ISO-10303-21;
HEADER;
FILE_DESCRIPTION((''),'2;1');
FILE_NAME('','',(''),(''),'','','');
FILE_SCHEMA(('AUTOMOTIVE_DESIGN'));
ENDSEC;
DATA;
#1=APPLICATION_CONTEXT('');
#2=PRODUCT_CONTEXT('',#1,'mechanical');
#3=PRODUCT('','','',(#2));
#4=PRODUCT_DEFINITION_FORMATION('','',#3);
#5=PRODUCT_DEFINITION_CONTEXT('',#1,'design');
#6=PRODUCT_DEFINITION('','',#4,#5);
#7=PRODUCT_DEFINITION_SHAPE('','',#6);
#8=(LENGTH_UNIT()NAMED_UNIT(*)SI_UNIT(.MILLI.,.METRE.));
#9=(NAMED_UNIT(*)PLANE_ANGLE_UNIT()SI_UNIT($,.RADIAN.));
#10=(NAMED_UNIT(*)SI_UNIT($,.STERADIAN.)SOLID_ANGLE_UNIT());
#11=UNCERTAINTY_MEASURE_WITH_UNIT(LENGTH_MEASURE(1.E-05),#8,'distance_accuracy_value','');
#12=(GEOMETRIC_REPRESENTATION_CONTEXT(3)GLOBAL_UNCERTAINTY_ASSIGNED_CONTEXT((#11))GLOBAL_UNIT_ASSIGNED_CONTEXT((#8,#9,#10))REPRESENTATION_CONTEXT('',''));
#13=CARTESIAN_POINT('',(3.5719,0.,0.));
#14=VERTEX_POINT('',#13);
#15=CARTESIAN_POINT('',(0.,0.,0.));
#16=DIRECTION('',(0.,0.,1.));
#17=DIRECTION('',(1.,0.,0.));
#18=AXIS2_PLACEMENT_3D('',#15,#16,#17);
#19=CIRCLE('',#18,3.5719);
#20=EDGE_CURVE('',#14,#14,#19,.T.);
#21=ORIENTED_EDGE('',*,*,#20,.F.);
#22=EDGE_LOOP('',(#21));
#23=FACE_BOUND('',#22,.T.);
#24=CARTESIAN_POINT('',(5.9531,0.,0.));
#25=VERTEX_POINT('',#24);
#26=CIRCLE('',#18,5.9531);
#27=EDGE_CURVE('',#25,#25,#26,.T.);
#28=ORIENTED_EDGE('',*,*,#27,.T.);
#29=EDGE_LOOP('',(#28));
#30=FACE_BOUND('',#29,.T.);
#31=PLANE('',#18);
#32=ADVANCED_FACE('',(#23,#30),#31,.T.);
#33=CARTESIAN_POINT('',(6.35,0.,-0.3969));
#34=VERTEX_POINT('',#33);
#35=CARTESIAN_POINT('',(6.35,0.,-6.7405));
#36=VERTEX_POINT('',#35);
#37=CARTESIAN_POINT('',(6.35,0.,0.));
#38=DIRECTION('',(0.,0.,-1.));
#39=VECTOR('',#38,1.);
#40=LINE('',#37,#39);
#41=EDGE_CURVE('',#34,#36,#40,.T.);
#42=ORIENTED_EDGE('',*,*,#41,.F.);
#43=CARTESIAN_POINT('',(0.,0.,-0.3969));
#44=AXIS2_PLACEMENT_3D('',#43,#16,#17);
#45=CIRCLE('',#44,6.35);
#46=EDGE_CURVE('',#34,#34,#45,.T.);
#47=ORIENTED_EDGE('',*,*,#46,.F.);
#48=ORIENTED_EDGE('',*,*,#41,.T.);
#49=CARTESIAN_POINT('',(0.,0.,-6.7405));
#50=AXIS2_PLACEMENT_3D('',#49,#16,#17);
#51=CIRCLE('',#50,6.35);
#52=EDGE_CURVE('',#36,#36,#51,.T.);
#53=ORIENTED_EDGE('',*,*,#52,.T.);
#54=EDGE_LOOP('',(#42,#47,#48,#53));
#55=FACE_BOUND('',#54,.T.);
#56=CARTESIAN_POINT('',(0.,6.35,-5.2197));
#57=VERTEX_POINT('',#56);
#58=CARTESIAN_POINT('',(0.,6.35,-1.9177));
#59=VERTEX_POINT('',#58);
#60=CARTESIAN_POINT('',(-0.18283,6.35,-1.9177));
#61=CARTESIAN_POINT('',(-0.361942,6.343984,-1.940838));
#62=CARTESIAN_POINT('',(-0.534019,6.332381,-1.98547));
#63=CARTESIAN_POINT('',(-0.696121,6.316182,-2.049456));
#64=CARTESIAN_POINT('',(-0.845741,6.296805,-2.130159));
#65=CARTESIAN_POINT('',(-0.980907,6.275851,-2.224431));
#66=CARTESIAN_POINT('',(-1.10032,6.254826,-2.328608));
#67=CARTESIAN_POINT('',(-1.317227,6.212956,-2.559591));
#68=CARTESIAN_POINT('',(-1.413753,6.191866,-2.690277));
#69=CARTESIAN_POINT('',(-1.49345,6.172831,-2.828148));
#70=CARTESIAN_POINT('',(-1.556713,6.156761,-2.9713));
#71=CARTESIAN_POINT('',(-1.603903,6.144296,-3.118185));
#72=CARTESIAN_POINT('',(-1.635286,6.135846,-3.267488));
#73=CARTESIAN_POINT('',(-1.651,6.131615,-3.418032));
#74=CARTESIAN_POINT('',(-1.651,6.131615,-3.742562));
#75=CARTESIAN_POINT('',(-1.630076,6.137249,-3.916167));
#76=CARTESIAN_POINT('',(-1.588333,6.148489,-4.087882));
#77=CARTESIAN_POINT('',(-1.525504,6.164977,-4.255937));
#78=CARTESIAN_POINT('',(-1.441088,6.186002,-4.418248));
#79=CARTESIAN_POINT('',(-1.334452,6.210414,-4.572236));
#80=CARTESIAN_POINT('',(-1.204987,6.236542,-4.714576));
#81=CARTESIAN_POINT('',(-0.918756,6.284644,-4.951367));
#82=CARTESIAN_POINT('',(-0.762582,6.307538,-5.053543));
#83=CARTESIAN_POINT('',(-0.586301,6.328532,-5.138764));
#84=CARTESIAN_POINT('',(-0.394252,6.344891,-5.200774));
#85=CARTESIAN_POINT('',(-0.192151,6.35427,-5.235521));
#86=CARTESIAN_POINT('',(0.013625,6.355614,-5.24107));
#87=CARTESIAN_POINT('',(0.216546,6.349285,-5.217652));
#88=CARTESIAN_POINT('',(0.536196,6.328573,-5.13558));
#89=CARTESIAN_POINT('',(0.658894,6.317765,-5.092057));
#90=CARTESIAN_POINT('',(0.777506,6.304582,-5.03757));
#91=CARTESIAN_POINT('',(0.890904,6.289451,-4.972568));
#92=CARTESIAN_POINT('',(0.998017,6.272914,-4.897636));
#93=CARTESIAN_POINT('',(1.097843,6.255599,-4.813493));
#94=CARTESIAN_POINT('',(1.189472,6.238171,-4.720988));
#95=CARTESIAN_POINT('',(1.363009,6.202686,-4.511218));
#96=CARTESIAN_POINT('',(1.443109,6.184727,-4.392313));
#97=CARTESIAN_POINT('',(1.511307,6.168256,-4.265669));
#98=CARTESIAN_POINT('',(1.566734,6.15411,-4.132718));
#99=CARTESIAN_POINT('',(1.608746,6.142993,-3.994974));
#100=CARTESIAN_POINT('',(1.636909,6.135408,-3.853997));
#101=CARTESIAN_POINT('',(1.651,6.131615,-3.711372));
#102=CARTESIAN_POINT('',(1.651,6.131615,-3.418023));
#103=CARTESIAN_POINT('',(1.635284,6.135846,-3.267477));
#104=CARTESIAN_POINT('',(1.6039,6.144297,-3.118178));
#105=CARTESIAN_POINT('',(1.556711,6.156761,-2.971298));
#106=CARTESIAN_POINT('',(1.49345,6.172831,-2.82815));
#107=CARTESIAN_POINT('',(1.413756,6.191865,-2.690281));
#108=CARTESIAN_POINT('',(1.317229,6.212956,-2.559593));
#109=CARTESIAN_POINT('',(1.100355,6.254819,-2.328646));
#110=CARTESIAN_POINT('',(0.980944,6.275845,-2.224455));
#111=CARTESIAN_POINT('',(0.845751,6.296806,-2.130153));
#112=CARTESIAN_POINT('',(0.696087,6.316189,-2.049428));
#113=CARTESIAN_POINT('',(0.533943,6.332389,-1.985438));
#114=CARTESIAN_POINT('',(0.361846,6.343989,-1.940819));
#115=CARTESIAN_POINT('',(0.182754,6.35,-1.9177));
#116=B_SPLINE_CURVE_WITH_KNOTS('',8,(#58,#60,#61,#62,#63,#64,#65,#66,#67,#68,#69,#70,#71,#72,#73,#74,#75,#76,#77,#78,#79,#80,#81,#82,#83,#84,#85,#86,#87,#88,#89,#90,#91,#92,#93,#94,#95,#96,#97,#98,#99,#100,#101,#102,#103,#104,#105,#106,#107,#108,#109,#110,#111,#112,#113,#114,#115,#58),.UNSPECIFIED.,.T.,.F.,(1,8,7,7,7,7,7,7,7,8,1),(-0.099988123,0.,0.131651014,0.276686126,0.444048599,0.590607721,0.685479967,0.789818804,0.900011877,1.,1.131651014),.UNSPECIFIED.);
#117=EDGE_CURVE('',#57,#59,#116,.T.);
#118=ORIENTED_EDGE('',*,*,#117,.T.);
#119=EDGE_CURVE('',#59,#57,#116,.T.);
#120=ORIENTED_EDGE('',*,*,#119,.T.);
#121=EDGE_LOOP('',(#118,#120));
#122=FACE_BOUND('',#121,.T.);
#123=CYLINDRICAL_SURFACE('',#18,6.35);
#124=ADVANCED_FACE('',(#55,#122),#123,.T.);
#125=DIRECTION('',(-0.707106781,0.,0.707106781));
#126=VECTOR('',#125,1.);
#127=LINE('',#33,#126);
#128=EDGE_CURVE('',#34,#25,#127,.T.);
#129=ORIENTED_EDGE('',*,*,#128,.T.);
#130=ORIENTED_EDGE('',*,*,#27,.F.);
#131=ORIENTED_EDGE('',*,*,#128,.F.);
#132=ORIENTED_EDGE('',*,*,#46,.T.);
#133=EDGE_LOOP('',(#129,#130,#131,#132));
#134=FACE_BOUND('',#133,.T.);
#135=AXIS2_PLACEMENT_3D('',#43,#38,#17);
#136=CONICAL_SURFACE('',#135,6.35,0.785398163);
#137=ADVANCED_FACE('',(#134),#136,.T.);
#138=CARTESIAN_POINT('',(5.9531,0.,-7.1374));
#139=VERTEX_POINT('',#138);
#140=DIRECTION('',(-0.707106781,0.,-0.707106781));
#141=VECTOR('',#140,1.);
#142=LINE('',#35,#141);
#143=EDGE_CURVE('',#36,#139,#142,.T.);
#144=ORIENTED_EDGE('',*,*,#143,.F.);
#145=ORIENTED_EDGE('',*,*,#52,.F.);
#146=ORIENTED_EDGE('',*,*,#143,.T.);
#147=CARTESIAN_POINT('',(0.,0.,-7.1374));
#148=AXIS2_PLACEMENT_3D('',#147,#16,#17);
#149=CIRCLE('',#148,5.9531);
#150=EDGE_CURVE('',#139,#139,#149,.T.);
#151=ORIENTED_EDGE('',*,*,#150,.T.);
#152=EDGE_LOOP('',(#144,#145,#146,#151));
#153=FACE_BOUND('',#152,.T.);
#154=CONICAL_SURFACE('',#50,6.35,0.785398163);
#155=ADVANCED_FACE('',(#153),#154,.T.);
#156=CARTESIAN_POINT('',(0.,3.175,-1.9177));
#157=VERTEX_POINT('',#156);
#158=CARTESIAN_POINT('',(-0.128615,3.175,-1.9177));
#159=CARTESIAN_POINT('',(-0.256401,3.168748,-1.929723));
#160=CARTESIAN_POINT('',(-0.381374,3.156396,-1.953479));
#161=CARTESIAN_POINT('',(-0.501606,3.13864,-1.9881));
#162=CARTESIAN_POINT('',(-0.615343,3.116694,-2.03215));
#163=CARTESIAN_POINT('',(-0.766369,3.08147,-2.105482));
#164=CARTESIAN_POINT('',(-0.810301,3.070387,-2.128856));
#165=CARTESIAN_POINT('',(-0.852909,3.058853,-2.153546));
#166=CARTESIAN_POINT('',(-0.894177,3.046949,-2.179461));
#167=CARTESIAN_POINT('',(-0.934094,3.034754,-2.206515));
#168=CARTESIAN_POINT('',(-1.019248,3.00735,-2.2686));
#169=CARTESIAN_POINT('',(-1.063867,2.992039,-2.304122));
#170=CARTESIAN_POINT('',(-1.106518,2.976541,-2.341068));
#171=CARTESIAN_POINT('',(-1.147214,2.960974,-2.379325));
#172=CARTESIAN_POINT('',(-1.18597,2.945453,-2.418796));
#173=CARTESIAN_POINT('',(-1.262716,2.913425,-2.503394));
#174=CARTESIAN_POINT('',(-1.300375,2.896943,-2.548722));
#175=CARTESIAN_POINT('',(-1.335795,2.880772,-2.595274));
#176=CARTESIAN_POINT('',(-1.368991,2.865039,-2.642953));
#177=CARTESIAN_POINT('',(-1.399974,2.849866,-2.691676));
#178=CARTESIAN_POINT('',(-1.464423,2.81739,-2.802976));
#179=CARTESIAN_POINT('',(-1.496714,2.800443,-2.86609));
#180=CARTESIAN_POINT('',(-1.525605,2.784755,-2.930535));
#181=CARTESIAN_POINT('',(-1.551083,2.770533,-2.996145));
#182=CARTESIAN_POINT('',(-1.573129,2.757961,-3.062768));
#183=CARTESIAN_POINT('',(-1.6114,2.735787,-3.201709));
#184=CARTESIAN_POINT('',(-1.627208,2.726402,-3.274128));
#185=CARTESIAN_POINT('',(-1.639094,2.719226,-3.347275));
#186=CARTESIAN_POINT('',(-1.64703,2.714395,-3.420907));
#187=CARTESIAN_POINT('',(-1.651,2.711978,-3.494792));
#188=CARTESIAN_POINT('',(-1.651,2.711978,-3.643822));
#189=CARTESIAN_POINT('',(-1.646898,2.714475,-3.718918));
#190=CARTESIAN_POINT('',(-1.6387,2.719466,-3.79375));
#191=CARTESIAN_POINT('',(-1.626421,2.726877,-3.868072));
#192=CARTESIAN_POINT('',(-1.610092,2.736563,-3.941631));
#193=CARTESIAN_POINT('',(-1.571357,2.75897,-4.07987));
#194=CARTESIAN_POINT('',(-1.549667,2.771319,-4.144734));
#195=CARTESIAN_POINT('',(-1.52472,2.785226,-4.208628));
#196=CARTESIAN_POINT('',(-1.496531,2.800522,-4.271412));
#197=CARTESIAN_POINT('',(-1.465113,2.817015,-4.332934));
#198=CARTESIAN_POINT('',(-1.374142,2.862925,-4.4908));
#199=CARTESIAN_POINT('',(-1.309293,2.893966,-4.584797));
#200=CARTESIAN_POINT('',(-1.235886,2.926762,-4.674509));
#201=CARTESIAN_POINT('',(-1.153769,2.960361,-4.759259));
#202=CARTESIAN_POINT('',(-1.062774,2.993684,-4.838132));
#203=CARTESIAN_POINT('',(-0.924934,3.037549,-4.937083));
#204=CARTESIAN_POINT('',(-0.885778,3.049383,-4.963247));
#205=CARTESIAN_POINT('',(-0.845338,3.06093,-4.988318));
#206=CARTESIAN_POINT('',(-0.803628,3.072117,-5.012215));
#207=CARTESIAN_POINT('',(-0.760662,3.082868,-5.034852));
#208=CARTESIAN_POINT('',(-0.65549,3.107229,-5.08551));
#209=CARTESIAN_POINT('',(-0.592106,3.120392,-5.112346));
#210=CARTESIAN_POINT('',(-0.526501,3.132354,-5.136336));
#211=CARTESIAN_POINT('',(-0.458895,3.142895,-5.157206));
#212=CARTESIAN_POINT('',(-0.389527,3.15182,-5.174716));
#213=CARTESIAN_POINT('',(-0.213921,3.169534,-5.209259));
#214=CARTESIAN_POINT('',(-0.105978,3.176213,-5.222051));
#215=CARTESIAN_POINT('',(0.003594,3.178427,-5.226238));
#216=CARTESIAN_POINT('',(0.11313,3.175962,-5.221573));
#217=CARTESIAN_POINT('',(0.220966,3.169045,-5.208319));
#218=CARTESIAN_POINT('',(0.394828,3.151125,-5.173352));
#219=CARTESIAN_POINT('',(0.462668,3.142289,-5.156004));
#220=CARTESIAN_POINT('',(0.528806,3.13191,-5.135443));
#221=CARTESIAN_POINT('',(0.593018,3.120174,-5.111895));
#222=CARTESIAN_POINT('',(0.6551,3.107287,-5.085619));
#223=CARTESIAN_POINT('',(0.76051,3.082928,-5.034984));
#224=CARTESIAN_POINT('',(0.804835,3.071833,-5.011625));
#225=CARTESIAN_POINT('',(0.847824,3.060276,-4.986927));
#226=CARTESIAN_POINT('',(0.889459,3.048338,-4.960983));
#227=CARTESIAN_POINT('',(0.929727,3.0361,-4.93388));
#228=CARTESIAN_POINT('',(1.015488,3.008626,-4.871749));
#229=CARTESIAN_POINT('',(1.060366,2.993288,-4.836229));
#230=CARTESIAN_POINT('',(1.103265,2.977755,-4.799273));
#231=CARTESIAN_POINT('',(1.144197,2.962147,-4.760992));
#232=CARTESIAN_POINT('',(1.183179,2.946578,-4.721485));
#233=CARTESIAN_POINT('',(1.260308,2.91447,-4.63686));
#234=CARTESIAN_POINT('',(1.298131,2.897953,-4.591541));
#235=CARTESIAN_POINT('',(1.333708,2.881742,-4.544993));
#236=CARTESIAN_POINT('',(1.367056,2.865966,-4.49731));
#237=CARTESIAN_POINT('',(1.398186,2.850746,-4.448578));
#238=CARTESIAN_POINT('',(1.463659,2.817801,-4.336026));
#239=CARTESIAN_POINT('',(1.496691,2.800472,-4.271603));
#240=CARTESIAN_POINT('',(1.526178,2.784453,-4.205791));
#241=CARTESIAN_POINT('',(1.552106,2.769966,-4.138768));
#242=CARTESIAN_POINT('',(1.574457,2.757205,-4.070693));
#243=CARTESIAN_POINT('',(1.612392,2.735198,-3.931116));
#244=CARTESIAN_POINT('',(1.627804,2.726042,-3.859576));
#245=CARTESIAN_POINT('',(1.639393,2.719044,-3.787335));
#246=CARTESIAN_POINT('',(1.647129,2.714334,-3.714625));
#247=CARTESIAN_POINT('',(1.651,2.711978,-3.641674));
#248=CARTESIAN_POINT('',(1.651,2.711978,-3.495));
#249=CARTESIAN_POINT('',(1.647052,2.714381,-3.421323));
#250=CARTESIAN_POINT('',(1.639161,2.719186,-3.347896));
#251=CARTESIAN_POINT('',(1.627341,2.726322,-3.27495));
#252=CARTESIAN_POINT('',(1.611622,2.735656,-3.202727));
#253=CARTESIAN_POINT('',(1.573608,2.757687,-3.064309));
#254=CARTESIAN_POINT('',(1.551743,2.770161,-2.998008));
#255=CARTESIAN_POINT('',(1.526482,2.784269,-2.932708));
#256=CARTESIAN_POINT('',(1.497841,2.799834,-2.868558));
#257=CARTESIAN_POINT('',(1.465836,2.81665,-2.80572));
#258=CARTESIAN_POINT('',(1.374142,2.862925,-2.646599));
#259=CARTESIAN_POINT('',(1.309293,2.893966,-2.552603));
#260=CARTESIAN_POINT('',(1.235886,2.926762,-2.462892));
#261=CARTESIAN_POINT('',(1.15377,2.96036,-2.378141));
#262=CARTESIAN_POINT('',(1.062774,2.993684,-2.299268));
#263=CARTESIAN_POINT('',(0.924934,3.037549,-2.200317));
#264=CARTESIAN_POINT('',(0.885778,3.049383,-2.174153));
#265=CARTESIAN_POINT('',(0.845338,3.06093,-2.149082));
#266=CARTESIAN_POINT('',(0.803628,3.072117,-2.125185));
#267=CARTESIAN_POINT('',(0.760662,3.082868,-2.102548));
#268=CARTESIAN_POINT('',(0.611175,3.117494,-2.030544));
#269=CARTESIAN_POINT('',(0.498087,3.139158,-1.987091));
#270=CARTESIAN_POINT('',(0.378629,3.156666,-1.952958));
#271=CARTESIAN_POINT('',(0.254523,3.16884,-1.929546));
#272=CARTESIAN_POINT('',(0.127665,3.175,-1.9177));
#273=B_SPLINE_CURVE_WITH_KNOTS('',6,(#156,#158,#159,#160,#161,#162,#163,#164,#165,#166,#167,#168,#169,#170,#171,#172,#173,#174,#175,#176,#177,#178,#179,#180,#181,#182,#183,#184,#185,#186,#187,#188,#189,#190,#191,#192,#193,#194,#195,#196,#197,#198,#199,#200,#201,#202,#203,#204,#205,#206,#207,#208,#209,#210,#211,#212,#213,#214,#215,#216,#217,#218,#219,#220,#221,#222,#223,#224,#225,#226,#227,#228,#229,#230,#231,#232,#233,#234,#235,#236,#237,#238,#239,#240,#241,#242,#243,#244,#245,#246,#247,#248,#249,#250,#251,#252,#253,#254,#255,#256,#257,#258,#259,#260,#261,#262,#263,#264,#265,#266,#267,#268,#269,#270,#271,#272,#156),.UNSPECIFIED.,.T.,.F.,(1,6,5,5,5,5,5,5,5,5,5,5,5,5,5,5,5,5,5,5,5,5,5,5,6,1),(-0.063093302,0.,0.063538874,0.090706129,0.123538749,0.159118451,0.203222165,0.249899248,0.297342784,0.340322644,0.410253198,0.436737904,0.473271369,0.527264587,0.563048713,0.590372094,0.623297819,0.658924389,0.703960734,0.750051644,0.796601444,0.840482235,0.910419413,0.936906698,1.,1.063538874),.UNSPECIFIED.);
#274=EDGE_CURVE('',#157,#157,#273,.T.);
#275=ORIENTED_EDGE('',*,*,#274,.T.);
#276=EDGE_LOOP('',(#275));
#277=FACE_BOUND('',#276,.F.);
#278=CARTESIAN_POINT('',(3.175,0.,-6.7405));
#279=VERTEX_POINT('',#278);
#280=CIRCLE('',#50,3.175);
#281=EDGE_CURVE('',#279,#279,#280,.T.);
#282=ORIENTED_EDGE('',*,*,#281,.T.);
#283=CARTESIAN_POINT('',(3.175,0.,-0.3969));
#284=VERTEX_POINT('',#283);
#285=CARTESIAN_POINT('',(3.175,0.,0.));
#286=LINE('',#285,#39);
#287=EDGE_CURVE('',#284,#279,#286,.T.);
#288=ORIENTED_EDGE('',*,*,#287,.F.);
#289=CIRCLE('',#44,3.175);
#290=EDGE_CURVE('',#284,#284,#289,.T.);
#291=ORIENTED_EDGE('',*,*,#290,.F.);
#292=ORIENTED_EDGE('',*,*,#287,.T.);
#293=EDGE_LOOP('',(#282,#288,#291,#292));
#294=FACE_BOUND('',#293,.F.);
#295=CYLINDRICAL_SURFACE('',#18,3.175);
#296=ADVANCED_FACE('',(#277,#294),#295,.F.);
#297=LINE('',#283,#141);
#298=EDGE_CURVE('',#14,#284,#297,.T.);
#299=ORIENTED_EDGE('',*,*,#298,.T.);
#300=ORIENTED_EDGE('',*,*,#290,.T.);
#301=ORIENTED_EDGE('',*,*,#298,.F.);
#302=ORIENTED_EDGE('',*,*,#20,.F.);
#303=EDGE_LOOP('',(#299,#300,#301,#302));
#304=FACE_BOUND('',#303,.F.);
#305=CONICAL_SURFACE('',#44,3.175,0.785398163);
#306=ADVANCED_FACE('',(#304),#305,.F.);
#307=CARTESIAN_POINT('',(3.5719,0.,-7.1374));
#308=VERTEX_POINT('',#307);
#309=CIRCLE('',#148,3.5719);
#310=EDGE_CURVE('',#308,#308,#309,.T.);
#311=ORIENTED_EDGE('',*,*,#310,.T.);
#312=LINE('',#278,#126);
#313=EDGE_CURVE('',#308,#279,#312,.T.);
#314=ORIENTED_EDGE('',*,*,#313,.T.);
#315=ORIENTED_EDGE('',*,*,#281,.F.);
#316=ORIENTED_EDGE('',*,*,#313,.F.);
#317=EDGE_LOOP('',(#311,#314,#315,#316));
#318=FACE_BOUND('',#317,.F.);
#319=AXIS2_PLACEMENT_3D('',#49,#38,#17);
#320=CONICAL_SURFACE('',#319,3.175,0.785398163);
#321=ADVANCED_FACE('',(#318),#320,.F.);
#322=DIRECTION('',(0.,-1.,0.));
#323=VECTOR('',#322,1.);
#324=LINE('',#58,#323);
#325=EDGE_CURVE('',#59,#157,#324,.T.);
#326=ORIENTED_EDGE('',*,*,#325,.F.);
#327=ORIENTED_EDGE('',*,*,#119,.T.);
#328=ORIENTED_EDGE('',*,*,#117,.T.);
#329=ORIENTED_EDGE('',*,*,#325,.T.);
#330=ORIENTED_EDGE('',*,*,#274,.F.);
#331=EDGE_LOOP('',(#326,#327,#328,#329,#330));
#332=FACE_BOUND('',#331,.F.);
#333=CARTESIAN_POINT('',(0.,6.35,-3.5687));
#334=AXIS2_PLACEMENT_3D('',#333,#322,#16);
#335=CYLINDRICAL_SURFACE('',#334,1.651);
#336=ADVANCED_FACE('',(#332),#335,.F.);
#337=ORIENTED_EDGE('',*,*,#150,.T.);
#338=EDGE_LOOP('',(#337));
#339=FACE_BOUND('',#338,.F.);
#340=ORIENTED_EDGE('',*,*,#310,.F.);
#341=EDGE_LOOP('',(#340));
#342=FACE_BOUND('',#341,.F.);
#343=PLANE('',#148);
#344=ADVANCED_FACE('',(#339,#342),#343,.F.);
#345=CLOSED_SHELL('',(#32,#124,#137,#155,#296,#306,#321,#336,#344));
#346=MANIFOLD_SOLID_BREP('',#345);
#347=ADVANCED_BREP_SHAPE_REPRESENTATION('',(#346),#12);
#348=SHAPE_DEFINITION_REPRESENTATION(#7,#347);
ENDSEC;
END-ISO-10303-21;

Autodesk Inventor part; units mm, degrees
ref_plane "YZ Plane" through (0, 0, 0) normal (1, 0, 0) x (0, 1, 0)
ref_plane "XY Plane" through (0, 0, 0) normal (0, 0, 1) x (1, 0, 0)
sketch "Sketch1" plane through (0, 0, 0) normal (0, 0, 1) x (1, 0, 0)
  circle A0 centre (0, 0) radius 6.35
  dimension "d0" = 12.7
extrude "Extrusion1" add sketch "Sketch1" against normal blind 7.1374
sketch "Sketch2" plane through (0, 0, 0) normal (0, 0, 1) x (1, 0, 0)
  circle A0 centre (0, 0) radius 6.35 projected
  circle A1 centre (0, 0) radius 3.175
  dimension "d3" = 6.35
extrude "Extrusion2" cut sketch "Sketch2" against normal up to next contours A1
chamfer "Chamfer1" distance 0.3969 angle 45 4 edges at (-6.35, 0, 0) (-6.35, 0, -7.1374) (-3.175, 0, 0) (-3.175, 0, -7.1374)
ref_plane "Work Plane1" through (0, 6.35, 0) normal (0, 1, 0) x (-1, 0, 0)
sketch "Sketch3" plane through (0, 6.35, 0) normal (0, 1, 0) x (-1, 0, 0)
  line L0 (5.9531, -7.1374) -> (-5.9531, -7.1374) projected
  line L1 (6.35, -0.3969) -> (6.35, -6.7405) projected
  point P0 (0, 0)
  point P1 (0, -3.5687)
hole "Hole1" at (0, 6.35, -3.5687) direction (0, -1, 0) diameter 3.302 end up to surface thread size "8-32 UNC" class "2B" standard "ANSI Unified Screw Threads"
properties part number "Misc_ShaftCollar_Ruland_SC-4-F" material "Steel, Carbon"
